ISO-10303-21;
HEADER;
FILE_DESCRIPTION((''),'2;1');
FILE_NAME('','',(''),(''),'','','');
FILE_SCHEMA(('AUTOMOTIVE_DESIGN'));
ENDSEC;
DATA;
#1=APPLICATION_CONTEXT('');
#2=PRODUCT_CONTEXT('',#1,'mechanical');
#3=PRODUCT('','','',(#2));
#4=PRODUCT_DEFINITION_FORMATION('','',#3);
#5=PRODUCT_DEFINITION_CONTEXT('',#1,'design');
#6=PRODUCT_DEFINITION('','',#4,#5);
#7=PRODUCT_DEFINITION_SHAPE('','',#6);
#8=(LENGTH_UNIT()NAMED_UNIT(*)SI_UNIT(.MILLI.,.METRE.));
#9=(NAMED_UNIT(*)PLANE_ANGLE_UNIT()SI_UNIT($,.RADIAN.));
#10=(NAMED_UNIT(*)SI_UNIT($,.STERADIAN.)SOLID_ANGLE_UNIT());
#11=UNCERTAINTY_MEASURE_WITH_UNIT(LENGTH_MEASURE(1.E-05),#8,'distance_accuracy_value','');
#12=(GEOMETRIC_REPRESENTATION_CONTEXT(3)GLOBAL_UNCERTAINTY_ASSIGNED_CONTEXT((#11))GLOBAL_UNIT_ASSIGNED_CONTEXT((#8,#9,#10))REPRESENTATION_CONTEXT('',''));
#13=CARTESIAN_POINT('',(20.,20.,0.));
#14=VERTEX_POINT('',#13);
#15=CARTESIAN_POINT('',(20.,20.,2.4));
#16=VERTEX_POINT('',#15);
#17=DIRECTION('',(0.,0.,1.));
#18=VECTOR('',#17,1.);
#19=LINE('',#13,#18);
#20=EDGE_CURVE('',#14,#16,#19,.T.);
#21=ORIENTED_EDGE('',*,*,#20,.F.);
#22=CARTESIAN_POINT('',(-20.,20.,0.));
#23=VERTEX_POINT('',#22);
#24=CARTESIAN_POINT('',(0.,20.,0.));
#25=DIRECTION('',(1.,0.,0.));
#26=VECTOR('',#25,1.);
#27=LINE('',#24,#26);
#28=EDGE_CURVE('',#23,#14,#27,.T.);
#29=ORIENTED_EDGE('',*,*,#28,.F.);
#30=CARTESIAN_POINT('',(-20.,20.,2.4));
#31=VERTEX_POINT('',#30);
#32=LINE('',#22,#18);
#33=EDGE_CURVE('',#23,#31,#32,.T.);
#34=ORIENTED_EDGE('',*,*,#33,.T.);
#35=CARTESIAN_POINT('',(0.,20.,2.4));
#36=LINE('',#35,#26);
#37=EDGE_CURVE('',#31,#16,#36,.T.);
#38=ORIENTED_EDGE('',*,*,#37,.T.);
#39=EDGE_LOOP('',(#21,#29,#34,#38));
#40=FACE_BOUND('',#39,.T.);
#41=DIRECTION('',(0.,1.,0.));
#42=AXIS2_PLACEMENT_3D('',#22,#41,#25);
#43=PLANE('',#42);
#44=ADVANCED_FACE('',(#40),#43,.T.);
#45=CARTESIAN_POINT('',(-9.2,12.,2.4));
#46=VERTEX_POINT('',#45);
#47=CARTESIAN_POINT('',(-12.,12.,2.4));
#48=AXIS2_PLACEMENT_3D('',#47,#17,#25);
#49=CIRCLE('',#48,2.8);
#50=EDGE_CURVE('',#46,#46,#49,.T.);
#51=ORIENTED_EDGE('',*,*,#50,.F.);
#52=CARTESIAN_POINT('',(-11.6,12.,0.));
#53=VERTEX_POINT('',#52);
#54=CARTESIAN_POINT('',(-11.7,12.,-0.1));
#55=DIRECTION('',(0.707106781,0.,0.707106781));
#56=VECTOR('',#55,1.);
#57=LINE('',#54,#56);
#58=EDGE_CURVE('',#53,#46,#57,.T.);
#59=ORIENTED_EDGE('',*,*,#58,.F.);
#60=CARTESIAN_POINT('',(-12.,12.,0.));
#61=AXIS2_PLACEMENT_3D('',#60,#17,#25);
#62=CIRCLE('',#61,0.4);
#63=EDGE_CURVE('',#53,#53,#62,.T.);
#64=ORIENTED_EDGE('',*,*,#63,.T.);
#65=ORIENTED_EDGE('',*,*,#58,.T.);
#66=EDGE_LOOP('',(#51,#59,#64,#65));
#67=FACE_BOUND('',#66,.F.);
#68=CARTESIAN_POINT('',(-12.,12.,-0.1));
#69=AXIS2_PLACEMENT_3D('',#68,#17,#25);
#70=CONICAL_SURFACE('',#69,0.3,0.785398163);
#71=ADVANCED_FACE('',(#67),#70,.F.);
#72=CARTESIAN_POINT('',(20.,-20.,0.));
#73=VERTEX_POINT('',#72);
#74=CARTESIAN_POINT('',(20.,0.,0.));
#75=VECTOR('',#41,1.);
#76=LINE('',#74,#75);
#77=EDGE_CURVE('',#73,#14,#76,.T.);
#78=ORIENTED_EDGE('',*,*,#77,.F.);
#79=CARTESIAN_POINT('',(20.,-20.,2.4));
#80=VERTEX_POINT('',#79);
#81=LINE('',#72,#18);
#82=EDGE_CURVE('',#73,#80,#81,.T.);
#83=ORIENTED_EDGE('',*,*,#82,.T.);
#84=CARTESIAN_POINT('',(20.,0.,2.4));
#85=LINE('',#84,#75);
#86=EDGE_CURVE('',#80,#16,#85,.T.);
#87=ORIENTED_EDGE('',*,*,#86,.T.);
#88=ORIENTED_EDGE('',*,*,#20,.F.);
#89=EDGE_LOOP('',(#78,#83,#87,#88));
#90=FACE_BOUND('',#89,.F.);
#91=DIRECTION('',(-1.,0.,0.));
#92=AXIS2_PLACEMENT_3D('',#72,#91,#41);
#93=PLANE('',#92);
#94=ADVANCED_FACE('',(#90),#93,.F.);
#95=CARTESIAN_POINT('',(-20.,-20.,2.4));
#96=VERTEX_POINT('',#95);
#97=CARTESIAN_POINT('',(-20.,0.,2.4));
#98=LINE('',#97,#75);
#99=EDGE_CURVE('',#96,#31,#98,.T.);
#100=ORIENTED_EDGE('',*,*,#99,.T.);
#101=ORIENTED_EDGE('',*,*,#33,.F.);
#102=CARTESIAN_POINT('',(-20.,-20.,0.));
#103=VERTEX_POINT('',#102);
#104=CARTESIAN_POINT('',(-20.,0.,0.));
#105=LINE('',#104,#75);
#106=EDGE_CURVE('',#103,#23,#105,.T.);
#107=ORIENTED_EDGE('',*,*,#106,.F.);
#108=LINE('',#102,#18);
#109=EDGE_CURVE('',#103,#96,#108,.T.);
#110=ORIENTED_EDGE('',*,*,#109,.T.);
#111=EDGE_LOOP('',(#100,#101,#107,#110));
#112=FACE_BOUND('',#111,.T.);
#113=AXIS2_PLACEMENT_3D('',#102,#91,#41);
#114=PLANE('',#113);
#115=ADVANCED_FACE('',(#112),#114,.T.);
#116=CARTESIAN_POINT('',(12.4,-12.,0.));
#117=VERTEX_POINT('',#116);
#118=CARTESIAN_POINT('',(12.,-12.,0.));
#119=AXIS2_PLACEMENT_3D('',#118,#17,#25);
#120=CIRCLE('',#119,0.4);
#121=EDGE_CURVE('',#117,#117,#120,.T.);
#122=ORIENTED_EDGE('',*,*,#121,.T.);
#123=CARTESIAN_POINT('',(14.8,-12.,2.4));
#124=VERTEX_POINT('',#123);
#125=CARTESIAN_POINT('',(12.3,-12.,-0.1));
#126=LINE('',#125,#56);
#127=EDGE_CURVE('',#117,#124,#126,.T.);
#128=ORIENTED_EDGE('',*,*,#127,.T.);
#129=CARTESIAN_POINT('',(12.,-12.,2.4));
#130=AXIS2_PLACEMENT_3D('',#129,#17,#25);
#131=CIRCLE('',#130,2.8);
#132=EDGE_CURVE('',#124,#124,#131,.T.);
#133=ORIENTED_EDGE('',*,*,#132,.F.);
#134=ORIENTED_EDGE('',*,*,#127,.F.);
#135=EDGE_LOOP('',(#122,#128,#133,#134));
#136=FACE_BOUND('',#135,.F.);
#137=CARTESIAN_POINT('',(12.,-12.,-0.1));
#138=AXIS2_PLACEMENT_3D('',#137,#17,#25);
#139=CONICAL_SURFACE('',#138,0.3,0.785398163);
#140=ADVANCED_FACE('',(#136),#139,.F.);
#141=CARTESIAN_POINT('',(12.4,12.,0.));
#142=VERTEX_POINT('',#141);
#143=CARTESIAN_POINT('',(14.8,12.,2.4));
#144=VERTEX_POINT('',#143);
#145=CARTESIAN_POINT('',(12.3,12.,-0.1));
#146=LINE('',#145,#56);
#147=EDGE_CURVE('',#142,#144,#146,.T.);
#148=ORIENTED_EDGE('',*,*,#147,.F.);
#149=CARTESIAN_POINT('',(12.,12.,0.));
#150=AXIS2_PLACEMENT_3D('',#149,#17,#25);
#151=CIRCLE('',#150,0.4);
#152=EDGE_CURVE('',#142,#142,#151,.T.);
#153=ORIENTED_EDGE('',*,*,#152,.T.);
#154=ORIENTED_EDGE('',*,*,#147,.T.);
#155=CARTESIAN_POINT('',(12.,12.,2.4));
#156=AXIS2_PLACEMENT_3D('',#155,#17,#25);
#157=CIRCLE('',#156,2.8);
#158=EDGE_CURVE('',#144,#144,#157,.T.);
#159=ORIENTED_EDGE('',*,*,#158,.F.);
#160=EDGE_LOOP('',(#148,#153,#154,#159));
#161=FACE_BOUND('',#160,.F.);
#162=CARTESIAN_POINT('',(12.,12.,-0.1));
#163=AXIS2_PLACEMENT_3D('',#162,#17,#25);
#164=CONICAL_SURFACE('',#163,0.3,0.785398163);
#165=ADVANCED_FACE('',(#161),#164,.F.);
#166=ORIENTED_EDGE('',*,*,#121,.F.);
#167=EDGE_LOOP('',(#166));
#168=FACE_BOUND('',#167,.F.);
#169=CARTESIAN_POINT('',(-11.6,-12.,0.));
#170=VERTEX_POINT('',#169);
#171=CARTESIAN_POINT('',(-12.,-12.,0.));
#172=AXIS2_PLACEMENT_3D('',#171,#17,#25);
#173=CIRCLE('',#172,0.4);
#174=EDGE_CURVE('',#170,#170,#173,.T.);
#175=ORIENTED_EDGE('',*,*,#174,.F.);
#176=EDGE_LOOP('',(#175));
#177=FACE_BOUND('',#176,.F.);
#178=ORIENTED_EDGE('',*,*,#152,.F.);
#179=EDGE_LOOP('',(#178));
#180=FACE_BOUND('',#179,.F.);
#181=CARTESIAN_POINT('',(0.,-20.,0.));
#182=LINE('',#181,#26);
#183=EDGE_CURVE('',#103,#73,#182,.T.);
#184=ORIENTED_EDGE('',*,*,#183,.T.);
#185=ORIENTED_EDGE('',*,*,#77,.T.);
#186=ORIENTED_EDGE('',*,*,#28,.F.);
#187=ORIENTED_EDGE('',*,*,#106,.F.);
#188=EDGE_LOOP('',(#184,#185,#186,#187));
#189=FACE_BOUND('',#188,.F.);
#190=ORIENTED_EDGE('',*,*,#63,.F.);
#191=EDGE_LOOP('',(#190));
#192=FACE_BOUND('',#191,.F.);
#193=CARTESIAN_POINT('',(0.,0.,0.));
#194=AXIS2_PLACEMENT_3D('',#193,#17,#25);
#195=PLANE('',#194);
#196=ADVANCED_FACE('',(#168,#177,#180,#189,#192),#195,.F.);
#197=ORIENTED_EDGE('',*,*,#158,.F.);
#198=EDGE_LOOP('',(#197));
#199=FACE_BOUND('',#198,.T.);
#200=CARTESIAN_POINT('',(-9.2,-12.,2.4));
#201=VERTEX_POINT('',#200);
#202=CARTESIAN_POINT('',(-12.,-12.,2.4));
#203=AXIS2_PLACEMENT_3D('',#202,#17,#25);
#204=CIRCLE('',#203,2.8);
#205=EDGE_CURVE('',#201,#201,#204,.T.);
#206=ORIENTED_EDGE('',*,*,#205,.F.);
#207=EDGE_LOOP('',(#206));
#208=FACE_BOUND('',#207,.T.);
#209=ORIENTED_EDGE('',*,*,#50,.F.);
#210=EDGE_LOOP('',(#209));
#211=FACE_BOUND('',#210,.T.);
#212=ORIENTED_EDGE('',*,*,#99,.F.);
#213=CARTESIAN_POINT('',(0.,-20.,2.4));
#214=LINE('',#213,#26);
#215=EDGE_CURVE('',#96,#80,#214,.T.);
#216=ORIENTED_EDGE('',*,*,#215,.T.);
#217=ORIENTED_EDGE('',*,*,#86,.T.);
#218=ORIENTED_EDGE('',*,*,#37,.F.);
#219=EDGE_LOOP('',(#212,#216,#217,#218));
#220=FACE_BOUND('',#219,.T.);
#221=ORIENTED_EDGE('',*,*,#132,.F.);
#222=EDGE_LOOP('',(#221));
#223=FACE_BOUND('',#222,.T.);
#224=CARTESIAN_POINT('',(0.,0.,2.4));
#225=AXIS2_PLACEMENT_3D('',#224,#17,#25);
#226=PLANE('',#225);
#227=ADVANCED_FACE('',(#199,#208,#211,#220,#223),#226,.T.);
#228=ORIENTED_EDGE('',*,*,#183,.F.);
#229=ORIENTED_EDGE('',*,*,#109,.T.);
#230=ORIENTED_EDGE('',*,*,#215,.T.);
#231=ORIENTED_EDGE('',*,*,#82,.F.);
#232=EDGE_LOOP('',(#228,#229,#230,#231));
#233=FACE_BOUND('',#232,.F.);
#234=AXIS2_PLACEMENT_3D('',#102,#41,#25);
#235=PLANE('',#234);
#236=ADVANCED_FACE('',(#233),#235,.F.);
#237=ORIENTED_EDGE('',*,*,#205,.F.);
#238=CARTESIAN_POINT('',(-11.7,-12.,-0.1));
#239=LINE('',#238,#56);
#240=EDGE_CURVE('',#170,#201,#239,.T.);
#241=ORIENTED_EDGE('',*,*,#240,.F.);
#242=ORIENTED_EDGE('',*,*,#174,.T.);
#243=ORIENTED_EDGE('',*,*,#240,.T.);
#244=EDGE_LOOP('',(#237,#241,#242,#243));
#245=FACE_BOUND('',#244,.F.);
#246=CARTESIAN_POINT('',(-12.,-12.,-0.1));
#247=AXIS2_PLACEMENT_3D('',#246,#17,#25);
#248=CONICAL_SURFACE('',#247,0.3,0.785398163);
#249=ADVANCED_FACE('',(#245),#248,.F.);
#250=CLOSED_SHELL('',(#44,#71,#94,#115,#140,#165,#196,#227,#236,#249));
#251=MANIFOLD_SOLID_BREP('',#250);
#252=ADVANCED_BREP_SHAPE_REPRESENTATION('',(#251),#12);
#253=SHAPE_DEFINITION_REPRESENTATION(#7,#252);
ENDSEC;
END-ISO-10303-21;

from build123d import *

# Parameters (mm, degrees)
F0_W     = 40
F0_H     = 40
F0_R     = 0.3
F1_DEPTH = 2.4


# Not quite as in the source:
# - a fillet or chamfer that OpenCascade refuses, or shapes differently, is made with other operations: its cross-section is extruded or revolved along the edge and cut away or added


with BuildPart() as f1:
    # F0 (on Top) → F1 (new body)
    with BuildSketch(Plane.XY):
        Rectangle(F0_W, F0_H)
        with Locations((-12, -12)):
            Circle(F0_R, mode=Mode.SUBTRACT)
        with Locations((12, -12)):
            Circle(F0_R, mode=Mode.SUBTRACT)
        with Locations((-12, 12)):
            Circle(F0_R, mode=Mode.SUBTRACT)
        with Locations((12, 12)):
            Circle(F0_R, mode=Mode.SUBTRACT)
    extrude(amount=F1_DEPTH)

    # F2: chamfer of 2.5 on 4 edges, made by hand

    # F2_s1 → F2_t2 (revolve, cut)
    with BuildSketch(Plane.XZ.offset(-12)):
        Polygon((-11.7, -0.1), (-9.2, 2.4), (-11.7, 2.4), align=None)
    revolve(axis=Axis((-12, 12, 2.4), (0, 0, 1)), mode=Mode.SUBTRACT)

    # F2_s3 → F2_t4 (revolve, cut)
    with BuildSketch(Plane.XZ.offset(-12)):
        Polygon((12.3, -0.1), (14.8, 2.4), (12.3, 2.4), align=None)
    revolve(axis=Axis((12, 12, 2.4), (0, 0, 1)), mode=Mode.SUBTRACT)

    # F2_s5 → F2_t6 (revolve, cut)
    with BuildSketch(Plane.XZ.offset(12)):
        Polygon((12.3, -0.1), (14.8, 2.4), (12.3, 2.4), align=None)
    revolve(axis=Axis((12, -12, 2.4), (0, 0, 1)), mode=Mode.SUBTRACT)

    # F2_s7 → F2_t8 (revolve, cut)
    with BuildSketch(Plane.XZ.offset(12)):
        Polygon((-11.7, -0.1), (-9.2, 2.4), (-11.7, 2.4), align=None)
    revolve(axis=Axis((-12, -12, 2.4), (0, 0, 1)), mode=Mode.SUBTRACT)


solid = f1.part
